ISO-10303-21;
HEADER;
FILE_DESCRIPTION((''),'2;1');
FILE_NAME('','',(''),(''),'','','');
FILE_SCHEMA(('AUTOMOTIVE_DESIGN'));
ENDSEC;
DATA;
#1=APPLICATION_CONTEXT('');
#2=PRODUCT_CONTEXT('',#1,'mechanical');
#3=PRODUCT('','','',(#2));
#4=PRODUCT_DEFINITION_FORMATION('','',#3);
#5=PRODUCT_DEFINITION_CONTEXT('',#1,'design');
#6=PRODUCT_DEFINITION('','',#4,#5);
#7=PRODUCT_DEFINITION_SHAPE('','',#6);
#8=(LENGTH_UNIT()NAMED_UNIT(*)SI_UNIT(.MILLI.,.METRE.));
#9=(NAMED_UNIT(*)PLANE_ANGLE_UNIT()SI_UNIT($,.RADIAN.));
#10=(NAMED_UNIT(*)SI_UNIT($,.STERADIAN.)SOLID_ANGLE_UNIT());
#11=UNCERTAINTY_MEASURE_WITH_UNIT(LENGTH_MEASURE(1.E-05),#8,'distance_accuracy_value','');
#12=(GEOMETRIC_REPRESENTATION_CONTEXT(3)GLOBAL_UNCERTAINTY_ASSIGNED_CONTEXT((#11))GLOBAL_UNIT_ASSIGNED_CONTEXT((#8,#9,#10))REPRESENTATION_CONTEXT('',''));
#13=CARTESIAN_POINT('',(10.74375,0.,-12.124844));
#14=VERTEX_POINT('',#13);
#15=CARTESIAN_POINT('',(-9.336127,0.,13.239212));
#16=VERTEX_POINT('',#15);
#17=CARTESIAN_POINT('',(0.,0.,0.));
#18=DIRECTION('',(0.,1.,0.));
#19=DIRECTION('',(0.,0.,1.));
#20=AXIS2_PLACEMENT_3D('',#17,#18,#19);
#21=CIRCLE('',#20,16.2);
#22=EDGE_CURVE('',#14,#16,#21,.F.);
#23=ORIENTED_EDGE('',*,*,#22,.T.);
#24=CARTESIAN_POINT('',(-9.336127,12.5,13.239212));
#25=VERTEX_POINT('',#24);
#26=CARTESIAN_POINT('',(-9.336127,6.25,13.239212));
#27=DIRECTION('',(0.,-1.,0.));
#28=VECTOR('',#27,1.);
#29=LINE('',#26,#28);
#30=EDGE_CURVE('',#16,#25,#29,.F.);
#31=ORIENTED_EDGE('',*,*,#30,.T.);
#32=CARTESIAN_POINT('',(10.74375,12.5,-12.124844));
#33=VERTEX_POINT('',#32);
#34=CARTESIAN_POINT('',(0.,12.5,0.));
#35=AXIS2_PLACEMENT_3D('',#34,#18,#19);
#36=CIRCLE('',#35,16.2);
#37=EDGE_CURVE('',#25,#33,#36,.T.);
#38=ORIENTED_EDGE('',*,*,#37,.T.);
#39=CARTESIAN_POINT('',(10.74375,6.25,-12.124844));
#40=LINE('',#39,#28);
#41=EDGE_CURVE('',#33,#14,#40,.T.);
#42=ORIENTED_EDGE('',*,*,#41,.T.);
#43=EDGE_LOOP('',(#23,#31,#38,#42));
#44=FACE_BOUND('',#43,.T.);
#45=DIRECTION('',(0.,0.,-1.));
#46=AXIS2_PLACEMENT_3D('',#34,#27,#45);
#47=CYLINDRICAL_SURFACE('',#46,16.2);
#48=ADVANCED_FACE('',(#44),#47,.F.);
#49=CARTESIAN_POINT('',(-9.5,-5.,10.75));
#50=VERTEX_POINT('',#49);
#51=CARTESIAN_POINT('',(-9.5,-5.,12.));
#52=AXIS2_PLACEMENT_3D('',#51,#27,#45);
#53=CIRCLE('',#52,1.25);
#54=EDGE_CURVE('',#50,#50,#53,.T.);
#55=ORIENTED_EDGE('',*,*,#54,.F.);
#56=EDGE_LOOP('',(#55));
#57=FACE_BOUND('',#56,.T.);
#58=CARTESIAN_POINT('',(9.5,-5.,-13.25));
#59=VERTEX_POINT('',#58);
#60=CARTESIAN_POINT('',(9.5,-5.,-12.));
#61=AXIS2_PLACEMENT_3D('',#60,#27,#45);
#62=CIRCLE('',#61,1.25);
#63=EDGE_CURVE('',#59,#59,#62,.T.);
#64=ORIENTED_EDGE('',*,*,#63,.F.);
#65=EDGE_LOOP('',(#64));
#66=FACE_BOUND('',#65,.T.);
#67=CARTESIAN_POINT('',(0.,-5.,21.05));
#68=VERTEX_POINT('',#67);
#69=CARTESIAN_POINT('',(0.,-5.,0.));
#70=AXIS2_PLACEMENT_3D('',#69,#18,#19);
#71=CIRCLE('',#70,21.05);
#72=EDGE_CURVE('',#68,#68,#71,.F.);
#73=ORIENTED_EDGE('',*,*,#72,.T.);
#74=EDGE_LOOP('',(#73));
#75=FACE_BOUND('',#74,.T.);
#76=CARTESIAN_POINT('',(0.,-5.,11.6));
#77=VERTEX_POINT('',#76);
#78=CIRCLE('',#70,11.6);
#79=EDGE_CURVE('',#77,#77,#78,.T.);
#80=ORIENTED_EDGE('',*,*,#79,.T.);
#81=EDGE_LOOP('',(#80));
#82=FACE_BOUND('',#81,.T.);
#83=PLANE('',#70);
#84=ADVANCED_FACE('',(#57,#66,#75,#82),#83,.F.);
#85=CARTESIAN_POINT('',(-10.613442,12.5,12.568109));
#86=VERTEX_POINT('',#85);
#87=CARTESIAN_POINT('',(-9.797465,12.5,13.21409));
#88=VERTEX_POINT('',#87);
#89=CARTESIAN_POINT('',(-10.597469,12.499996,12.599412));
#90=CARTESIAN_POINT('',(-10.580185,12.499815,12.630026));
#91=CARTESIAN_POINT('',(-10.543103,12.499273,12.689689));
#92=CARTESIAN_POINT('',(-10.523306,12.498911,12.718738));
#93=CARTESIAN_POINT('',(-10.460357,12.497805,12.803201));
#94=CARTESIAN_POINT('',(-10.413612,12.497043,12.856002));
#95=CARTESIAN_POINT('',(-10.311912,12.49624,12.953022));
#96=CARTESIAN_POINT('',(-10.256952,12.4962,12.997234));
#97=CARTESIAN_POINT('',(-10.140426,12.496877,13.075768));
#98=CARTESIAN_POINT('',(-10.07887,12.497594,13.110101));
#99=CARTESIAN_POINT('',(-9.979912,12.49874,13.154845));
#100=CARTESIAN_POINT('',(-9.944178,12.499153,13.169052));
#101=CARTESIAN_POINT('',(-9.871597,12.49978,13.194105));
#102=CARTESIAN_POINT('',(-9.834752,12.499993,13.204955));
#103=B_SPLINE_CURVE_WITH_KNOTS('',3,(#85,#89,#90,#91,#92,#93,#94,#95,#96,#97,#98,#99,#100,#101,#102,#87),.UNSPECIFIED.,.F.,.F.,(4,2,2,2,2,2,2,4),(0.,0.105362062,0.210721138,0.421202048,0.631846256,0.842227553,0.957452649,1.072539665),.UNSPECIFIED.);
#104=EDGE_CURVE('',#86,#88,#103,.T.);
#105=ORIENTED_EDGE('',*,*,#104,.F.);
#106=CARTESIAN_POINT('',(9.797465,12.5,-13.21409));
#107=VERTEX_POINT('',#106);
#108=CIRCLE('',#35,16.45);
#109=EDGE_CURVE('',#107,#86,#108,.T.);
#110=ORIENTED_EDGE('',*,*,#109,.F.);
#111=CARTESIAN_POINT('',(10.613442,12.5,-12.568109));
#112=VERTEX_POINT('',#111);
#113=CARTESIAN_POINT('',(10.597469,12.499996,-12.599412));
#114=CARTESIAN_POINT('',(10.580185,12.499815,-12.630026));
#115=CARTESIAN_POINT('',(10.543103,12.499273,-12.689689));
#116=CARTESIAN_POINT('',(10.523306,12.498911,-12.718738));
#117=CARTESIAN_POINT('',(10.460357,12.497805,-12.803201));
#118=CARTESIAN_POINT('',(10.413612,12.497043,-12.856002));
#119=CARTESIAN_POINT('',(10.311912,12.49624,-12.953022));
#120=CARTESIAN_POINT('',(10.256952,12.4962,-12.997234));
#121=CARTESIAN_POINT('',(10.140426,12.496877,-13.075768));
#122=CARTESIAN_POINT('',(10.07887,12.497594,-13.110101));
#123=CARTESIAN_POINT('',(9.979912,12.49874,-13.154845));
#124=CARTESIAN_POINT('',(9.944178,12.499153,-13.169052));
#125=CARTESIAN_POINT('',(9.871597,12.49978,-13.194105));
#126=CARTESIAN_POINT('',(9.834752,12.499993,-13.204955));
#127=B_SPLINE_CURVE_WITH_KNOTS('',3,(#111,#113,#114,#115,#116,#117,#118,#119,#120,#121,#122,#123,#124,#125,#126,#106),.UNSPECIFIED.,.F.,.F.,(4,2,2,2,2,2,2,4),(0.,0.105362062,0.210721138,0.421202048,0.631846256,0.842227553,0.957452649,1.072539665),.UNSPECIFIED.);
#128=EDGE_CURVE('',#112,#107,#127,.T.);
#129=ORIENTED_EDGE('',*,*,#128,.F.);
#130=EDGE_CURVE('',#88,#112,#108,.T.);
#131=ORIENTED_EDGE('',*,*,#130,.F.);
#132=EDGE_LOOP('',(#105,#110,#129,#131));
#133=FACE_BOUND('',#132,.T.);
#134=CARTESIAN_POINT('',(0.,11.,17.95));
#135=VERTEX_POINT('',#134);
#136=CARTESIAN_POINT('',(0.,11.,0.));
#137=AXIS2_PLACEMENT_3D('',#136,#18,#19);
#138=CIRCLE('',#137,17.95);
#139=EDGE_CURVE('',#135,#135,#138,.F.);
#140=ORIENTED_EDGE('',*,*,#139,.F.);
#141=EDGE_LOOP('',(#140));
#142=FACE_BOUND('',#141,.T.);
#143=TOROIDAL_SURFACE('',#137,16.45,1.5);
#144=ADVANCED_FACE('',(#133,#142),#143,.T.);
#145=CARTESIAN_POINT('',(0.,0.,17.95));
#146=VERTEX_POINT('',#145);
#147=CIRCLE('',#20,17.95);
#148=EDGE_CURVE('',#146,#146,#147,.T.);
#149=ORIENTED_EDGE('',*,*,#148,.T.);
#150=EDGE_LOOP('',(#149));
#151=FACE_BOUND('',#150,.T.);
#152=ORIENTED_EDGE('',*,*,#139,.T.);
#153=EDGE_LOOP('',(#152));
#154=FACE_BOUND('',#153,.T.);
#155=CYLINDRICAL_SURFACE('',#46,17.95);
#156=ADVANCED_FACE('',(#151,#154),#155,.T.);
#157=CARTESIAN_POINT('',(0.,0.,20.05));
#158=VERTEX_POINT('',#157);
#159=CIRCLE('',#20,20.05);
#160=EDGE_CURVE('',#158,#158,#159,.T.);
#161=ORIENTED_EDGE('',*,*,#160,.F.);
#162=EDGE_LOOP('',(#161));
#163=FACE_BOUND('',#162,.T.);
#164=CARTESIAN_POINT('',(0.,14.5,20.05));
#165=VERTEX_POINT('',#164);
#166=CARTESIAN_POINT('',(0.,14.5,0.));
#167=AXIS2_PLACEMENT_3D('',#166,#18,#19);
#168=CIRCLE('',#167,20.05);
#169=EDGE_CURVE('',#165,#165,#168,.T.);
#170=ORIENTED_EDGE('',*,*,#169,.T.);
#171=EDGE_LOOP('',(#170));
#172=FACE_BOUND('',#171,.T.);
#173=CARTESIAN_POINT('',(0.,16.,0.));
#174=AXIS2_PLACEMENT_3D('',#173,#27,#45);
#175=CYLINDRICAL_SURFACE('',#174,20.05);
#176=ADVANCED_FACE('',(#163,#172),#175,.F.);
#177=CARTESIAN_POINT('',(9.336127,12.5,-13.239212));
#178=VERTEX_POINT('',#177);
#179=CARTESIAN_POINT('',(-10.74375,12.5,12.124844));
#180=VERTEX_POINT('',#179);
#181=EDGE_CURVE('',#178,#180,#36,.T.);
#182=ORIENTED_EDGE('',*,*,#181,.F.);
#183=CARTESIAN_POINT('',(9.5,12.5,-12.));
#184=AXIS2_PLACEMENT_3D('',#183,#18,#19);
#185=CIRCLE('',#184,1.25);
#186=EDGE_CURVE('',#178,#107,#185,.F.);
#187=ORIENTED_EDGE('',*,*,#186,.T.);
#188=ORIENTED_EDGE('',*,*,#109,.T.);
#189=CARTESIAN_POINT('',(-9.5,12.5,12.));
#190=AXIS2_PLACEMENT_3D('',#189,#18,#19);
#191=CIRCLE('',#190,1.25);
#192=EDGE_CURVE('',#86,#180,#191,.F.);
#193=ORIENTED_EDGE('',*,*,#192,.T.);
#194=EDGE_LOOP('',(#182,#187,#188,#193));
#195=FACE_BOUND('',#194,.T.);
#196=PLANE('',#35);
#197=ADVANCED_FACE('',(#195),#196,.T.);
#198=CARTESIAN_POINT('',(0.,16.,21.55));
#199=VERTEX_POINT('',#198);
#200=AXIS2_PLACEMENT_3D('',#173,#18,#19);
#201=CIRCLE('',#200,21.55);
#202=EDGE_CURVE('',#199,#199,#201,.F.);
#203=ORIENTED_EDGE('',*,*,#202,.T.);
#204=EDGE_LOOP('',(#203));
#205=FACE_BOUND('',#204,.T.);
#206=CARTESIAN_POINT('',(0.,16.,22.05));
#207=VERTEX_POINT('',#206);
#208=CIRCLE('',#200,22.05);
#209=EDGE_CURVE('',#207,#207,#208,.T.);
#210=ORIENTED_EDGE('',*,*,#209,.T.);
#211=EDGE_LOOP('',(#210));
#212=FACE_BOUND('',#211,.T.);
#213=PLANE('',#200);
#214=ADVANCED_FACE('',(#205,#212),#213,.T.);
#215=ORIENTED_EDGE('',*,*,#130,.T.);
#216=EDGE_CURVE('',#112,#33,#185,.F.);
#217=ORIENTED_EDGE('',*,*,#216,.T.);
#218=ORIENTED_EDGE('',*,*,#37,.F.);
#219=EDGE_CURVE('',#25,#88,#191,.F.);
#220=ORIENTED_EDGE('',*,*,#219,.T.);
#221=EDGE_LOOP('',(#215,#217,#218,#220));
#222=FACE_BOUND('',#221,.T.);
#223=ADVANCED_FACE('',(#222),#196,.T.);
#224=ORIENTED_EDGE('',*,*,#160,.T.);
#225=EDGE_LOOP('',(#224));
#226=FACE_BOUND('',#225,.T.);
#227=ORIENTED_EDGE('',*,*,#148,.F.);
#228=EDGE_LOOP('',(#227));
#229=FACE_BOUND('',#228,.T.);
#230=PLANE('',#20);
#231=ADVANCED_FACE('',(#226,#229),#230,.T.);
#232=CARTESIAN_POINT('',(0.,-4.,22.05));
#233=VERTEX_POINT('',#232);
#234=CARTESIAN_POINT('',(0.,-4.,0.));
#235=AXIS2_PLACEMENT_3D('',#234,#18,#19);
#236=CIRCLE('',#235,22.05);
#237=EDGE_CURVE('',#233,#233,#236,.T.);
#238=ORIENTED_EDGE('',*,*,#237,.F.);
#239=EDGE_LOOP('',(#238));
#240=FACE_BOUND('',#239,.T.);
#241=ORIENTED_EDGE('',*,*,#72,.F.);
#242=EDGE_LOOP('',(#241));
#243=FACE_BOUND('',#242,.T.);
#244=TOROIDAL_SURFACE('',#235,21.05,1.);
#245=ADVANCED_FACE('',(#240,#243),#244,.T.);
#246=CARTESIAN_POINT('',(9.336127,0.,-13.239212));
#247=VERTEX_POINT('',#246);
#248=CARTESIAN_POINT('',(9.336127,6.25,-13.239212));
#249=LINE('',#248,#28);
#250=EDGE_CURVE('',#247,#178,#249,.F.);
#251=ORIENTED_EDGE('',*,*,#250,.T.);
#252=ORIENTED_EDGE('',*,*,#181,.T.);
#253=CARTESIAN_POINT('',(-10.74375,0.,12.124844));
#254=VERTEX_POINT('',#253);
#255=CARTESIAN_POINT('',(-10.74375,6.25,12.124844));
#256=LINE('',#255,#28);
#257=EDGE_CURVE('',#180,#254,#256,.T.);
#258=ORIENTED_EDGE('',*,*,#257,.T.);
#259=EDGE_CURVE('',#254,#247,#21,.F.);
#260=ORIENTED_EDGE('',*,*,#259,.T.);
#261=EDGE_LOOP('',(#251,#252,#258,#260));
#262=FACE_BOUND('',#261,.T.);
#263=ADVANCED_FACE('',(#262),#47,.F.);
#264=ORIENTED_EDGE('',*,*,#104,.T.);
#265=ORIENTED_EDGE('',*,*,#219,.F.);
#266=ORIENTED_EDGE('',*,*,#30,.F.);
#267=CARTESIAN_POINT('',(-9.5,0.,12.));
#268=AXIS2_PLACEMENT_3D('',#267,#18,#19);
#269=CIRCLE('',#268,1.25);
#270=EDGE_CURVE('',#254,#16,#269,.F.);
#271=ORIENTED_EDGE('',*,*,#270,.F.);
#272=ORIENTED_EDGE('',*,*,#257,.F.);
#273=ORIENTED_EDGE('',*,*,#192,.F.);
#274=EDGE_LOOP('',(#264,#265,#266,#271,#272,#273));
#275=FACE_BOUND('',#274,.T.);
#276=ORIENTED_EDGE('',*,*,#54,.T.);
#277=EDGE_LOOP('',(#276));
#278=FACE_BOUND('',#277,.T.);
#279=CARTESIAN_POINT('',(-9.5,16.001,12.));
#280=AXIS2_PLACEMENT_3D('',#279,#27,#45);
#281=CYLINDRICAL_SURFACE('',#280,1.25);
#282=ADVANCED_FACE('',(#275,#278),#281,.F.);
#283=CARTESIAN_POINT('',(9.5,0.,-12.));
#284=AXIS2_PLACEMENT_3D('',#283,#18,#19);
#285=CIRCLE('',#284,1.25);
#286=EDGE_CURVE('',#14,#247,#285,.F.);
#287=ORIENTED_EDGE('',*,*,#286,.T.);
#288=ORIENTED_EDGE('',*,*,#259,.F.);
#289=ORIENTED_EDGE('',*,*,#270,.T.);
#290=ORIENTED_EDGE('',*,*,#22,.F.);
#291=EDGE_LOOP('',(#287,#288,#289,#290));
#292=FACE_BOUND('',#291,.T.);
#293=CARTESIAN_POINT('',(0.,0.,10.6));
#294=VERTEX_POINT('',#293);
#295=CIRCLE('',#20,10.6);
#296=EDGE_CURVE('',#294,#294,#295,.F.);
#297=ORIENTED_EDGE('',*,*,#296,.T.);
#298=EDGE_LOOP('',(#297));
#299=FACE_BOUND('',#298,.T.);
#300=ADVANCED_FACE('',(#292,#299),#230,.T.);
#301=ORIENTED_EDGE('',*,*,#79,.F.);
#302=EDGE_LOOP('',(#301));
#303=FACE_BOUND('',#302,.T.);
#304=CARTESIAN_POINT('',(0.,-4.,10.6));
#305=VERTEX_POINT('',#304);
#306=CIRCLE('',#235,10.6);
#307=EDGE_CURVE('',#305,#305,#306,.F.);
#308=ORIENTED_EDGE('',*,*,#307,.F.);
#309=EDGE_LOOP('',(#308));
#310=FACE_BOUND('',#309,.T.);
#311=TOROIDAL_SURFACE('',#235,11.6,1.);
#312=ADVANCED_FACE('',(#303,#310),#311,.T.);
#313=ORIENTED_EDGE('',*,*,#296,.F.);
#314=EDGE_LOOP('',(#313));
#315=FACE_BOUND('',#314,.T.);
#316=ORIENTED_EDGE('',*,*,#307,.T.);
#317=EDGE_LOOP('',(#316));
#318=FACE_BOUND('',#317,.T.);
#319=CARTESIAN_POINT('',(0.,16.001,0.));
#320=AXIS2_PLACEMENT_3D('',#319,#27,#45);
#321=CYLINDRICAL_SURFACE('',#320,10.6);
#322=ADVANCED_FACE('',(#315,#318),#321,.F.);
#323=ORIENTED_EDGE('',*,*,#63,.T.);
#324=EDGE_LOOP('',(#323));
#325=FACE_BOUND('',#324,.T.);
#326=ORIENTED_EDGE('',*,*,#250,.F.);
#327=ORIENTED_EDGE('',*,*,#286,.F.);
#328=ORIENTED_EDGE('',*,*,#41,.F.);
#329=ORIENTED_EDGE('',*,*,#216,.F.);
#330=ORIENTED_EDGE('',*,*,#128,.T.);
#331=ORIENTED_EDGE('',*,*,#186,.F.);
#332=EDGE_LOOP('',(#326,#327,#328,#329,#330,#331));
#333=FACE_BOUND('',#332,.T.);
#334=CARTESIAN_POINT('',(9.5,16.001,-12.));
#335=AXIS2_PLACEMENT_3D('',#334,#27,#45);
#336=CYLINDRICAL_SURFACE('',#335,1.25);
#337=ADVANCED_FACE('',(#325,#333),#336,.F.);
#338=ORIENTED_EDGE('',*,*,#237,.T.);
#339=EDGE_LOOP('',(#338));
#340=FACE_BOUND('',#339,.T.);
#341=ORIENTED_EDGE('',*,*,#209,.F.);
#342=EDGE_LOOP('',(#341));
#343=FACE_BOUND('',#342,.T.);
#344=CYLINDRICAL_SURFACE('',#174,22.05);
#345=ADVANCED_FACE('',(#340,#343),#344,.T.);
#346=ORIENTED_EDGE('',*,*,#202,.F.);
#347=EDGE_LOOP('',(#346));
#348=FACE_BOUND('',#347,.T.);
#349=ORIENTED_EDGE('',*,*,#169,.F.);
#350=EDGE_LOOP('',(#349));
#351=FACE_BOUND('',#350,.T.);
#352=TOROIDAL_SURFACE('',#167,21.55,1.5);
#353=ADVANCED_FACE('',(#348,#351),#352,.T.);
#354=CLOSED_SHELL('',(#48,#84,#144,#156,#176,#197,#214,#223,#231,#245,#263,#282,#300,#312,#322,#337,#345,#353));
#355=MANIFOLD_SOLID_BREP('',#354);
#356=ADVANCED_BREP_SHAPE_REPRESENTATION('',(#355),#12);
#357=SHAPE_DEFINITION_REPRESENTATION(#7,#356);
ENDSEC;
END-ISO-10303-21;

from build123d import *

# Parameters (mm, degrees)
CROQUIS1_R              = 22.05
CROQUIS1_R_2            = 20.05
SALIENTE_EXTRUIR1_DEPTH = 16
CROQUIS1_4_R            = 17.95
CROQUIS1_4_R_2          = 16.2
SALIENTE_EXTRUIR2_DEPTH = 12.5
SALIENTE_EXTRUIR4_START = -5
CROQUIS1_6_R            = 22.05
CROQUIS1_6_R_2          = 20.05
CROQUIS1_6_R_3          = 17.95
CROQUIS1_6_R_4          = 16.2
SALIENTE_EXTRUIR4_DEPTH = 5
CORTAR_EXTRUIR1_REACH   = 39.595
CROQUIS4_R              = 10.6
CROQUIS4_R_2            = 1.25
REDONDEO1_R             = 1
REDONDEO2_R             = 1.5
REDONDEO3_R             = 1


with BuildPart() as part:
    # Croquis1 → Saliente-Extruir1 (new body)
    with BuildSketch(Plane(origin=(0, 0, 0), x_dir=(1, 0, 0), z_dir=(0, 1, 0))):
        with Locations(Location((0, 0, 0), (0, 0, 270))):
            Circle(CROQUIS1_R)
        with Locations(Location((0, 0, 0), (0, 0, 270))):
            Circle(CROQUIS1_R_2, mode=Mode.SUBTRACT)
    extrude(amount=SALIENTE_EXTRUIR1_DEPTH)



with BuildPart() as body_2:
    # Croquis1<4> → Saliente-Extruir2 (new body)
    with BuildSketch(Plane(origin=(0, 0, 0), x_dir=(1, 0, 0), z_dir=(0, 1, 0))):
        with Locations(Location((0, 0, 0), (0, 0, 270))):
            Circle(CROQUIS1_4_R)
        with Locations(Location((0, 0, 0), (0, 0, 270))):
            Circle(CROQUIS1_4_R_2, mode=Mode.SUBTRACT)
    extrude(amount=SALIENTE_EXTRUIR2_DEPTH)


with BuildPart() as part_1:
    add(part.part)

    add(body_2.part)  # Saliente-Extruir4 merges body 2
    # Croquis1<6> → Saliente-Extruir4 (add)
    # profile 1 of 4: a face of its own
    with BuildSketch(Plane(origin=(0, 0, 0), x_dir=(1, 0, 0), z_dir=(0, 1, 0)).offset(SALIENTE_EXTRUIR4_START)):
        with Locations(Location((0, 0, 0), (0, 0, 270))):
            Circle(CROQUIS1_6_R)
        with Locations(Location((0, 0, 0), (0, 0, 270))):
            Circle(CROQUIS1_6_R_2, mode=Mode.SUBTRACT)
    # profile 2 of 4: a face of its own
    with BuildSketch(Plane(origin=(0, 0, 0), x_dir=(1, 0, 0), z_dir=(0, 1, 0)).offset(SALIENTE_EXTRUIR4_START)):
        with Locations(Location((0, 0, 0), (0, 0, 270))):
            Circle(CROQUIS1_6_R_2)
        with Locations(Location((0, 0, 0), (0, 0, 270))):
            Circle(CROQUIS1_6_R_3, mode=Mode.SUBTRACT)
    # profile 3 of 4: a face of its own
    with BuildSketch(Plane(origin=(0, 0, 0), x_dir=(1, 0, 0), z_dir=(0, 1, 0)).offset(SALIENTE_EXTRUIR4_START)):
        with Locations(Location((0, 0, 0), (0, 0, 270))):
            Circle(CROQUIS1_6_R_3)
        with Locations(Location((0, 0, 0), (0, 0, 270))):
            Circle(CROQUIS1_6_R_4, mode=Mode.SUBTRACT)
    # profile 4 of 4: a face of its own
    with BuildSketch(Plane(origin=(0, 0, 0), x_dir=(1, 0, 0), z_dir=(0, 1, 0)).offset(SALIENTE_EXTRUIR4_START)):
        with Locations(Location((0, 0, 0), (0, 0, 270))):
            Circle(CROQUIS1_6_R_4)
    extrude(amount=SALIENTE_EXTRUIR4_DEPTH)

    # Croquis4 → Cortar-Extruir1 (cut, up to next)
    with BuildSketch(Plane.XZ.offset(5), mode=Mode.PRIVATE) as cortar_extruir1_sk1:
        with Locations(Location((0, 0, 0), (0, 0, 270))):
            Circle(CROQUIS4_R)
    cortar_extruir1_tool1 = extrude(cortar_extruir1_sk1.sketch, amount=-CORTAR_EXTRUIR1_REACH, mode=Mode.PRIVATE) & part_1.part
    # Croquis4 → Cortar-Extruir1 (cut, up to next)
    with BuildSketch(Plane.XZ.offset(5), mode=Mode.PRIVATE) as cortar_extruir1_sk2:
        with Locations(Location((-9.5, 12, 0), (0, 0, 270))):
            Circle(CROQUIS4_R_2)
    cortar_extruir1_tool2 = extrude(cortar_extruir1_sk2.sketch, amount=-CORTAR_EXTRUIR1_REACH, mode=Mode.PRIVATE) & part_1.part
    # Croquis4 → Cortar-Extruir1 (cut, up to next)
    with BuildSketch(Plane.XZ.offset(5), mode=Mode.PRIVATE) as cortar_extruir1_sk3:
        with Locations(Location((9.5, -12, 0), (0, 0, 270))):
            Circle(CROQUIS4_R_2)
    cortar_extruir1_tool3 = extrude(cortar_extruir1_sk3.sketch, amount=-CORTAR_EXTRUIR1_REACH, mode=Mode.PRIVATE) & part_1.part
    add(cortar_extruir1_tool1.solids().sort_by_distance((0, -5, 0))[0], mode=Mode.SUBTRACT)
    add(cortar_extruir1_tool2.solids().sort_by_distance((-9.5, -5, 12))[0], mode=Mode.SUBTRACT)
    add(cortar_extruir1_tool3.solids().sort_by_distance((9.5, -5, -12))[0], mode=Mode.SUBTRACT)

    # Redondeo1
    redondeo1_edges = [part_1.edges().sort_by_distance(p)[0] for p in [
        (0, -5, 10.6),
    ]]
    fillet(redondeo1_edges, radius=REDONDEO1_R)

    # Redondeo2
    # the kernel refuses this fillet: 1.5 mm, written as the material it takes off along each edge
    with BuildSketch(Plane(origin=(0, 12.5, 0), x_dir=(0, 0, 1), z_dir=(-1, 0, 0))) as redondeo2_piece_1:
        with BuildLine():
            CenterArc((17.95 - REDONDEO2_R, -REDONDEO2_R), REDONDEO2_R, 0, 90)
            Line((17.95, -REDONDEO2_R), (17.95, 0))
            Line((17.95, 0), (17.95 - REDONDEO2_R, 0))
        make_face()
    revolve(axis=Axis((0, 12.5, 0), (0, 1, 0)), mode=Mode.SUBTRACT)
    with BuildSketch(Plane(origin=(0, 16, 0), x_dir=(0, 0, 1), z_dir=(-1, 0, 0))) as redondeo2_piece_2:
        with BuildLine():
            CenterArc((20.05 + REDONDEO2_R, -REDONDEO2_R), REDONDEO2_R, 90, 90)
            Line((20.05, -REDONDEO2_R), (20.05, 0))
            Line((20.05, 0), (20.05 + REDONDEO2_R, 0))
        make_face()
    revolve(axis=Axis((0, 16, 0), (0, 1, 0)), mode=Mode.SUBTRACT)

    # Redondeo3
    redondeo3_edges = [part_1.edges().sort_by_distance(p)[0] for p in [
        (0, -5, -22.05),
    ]]
    fillet(redondeo3_edges, radius=REDONDEO3_R)


solid = part_1.part
